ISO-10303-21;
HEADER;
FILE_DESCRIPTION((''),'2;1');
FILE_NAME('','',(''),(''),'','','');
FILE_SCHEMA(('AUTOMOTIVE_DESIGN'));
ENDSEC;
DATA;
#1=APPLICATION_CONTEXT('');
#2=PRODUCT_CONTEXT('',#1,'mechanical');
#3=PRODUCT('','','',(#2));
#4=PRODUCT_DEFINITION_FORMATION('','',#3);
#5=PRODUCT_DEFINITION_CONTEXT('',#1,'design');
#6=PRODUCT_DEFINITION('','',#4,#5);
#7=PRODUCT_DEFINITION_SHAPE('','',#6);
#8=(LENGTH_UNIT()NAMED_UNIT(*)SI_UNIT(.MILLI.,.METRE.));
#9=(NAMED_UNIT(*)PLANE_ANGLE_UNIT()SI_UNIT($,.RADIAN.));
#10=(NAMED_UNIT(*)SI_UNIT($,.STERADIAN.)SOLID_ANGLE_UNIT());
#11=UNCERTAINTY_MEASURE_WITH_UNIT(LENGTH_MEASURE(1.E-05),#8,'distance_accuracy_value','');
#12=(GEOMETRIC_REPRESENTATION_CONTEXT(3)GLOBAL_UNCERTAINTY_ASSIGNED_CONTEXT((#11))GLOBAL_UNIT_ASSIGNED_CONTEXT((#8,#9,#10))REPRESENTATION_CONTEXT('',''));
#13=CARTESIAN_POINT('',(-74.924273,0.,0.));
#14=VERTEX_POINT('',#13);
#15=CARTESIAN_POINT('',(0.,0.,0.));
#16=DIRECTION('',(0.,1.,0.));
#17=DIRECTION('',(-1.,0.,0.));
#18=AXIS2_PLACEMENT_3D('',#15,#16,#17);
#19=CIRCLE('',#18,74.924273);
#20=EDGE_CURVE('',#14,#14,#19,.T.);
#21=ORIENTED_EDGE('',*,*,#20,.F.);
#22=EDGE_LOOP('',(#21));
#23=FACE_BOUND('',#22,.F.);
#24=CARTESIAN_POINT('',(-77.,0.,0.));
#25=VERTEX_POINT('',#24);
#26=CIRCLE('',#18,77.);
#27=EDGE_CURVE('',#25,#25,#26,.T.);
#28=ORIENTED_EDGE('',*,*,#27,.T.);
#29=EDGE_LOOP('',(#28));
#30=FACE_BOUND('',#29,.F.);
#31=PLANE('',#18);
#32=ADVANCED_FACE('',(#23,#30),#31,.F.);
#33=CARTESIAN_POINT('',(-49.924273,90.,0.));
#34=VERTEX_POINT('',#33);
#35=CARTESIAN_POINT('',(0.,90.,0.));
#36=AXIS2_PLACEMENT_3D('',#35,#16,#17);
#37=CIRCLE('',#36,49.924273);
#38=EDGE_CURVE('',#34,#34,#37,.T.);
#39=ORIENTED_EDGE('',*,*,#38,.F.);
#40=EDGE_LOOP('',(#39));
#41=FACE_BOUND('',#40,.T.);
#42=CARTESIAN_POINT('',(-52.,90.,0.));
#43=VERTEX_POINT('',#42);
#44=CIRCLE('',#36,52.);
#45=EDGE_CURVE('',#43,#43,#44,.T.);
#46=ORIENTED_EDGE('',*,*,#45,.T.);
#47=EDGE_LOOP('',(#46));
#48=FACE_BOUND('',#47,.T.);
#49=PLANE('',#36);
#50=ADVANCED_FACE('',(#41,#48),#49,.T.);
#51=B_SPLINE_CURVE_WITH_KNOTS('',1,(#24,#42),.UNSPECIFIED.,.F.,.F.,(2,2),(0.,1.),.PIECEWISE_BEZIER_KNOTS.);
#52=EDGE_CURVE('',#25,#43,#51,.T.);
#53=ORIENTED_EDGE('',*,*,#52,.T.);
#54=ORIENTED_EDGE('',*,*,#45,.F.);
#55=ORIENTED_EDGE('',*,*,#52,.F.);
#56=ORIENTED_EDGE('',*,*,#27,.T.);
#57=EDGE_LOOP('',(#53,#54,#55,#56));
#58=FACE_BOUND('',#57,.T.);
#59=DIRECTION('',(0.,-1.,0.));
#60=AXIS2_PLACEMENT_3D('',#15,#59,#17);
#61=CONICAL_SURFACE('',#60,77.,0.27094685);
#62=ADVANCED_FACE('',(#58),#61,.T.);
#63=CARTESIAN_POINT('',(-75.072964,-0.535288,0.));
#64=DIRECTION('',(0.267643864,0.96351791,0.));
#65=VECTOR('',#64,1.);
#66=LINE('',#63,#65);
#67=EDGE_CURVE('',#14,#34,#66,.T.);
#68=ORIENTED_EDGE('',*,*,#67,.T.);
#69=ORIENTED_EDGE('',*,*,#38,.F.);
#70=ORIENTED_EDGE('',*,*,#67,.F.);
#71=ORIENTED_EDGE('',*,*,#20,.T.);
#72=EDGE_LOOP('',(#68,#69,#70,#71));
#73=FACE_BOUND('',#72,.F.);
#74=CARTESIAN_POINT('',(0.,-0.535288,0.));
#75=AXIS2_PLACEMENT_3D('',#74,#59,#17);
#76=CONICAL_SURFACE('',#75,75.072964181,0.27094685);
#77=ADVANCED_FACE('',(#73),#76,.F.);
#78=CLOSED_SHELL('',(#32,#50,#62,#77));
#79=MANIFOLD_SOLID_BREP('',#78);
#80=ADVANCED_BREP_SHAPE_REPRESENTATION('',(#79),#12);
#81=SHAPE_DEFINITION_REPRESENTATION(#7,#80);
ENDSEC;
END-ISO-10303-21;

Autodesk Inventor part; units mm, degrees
ref_plane "YZ Plane" through (0, 0, 0) normal (1, 0, 0) x (0, 1, 0)
ref_plane "XY Plane" through (0, 0, 0) normal (0, 0, 1) x (1, 0, 0)
sketch "Szkic6" plane through (0, 0, 0) normal (0, 1, 0) x (-1, 0, 0)
  circle A0 centre (0, 0) radius 77
  dimension "d33" = 154
ref_plane "Płaszczyzna konstrukcyjna1" through (0, 90, 0) normal (0, 1, 0) x (-1, 0, 0)
sketch "Szkic7" plane through (0, 90, 0) normal (0, 1, 0) x (-1, 0, 0)
  circle A0 centre (0, 0) radius 52
  dimension "d35" = 104
loft "Wyciągnięcie złożone1" add profiles "Szkic6", "Szkic7"
shell "Skorupa1" thickness 2 removed faces 2 at (-18.5271, 90, 25.061) at (-23.2587, 0, 21.3864)
equation "\"d33\" = OD1"
equation "\"d35\" = OD2"
equation "\"d52\" = THK"
equation "\"SzerokośćGięciaPodcięcia\" = Grubość"
equation "\"RozmiarPodcięciaNarożnika\" = 4 * Grubość"
equation "\"PromieńPrzejścia\" = PromieńGięcia"
equation "\"Rozmiar_promienia_Jacobiego\" = PromieńGięcia"
equation "\"Wielk_odstępu\" = Grubość"
equation "\"d2\" = PromieńGięcia"
equation "\"d23\" = PromieńGięcia"
equation "\"OD1\" = 154"
equation "\"OD2\" = 104"
equation "\"THK\" = 2"
equation "\"Grubość\" = 1.5"
equation "\"PromieńGięcia\" = 3"
properties part number "Redukcja symetryczna Ø154x104x2 L=90" material "304"
